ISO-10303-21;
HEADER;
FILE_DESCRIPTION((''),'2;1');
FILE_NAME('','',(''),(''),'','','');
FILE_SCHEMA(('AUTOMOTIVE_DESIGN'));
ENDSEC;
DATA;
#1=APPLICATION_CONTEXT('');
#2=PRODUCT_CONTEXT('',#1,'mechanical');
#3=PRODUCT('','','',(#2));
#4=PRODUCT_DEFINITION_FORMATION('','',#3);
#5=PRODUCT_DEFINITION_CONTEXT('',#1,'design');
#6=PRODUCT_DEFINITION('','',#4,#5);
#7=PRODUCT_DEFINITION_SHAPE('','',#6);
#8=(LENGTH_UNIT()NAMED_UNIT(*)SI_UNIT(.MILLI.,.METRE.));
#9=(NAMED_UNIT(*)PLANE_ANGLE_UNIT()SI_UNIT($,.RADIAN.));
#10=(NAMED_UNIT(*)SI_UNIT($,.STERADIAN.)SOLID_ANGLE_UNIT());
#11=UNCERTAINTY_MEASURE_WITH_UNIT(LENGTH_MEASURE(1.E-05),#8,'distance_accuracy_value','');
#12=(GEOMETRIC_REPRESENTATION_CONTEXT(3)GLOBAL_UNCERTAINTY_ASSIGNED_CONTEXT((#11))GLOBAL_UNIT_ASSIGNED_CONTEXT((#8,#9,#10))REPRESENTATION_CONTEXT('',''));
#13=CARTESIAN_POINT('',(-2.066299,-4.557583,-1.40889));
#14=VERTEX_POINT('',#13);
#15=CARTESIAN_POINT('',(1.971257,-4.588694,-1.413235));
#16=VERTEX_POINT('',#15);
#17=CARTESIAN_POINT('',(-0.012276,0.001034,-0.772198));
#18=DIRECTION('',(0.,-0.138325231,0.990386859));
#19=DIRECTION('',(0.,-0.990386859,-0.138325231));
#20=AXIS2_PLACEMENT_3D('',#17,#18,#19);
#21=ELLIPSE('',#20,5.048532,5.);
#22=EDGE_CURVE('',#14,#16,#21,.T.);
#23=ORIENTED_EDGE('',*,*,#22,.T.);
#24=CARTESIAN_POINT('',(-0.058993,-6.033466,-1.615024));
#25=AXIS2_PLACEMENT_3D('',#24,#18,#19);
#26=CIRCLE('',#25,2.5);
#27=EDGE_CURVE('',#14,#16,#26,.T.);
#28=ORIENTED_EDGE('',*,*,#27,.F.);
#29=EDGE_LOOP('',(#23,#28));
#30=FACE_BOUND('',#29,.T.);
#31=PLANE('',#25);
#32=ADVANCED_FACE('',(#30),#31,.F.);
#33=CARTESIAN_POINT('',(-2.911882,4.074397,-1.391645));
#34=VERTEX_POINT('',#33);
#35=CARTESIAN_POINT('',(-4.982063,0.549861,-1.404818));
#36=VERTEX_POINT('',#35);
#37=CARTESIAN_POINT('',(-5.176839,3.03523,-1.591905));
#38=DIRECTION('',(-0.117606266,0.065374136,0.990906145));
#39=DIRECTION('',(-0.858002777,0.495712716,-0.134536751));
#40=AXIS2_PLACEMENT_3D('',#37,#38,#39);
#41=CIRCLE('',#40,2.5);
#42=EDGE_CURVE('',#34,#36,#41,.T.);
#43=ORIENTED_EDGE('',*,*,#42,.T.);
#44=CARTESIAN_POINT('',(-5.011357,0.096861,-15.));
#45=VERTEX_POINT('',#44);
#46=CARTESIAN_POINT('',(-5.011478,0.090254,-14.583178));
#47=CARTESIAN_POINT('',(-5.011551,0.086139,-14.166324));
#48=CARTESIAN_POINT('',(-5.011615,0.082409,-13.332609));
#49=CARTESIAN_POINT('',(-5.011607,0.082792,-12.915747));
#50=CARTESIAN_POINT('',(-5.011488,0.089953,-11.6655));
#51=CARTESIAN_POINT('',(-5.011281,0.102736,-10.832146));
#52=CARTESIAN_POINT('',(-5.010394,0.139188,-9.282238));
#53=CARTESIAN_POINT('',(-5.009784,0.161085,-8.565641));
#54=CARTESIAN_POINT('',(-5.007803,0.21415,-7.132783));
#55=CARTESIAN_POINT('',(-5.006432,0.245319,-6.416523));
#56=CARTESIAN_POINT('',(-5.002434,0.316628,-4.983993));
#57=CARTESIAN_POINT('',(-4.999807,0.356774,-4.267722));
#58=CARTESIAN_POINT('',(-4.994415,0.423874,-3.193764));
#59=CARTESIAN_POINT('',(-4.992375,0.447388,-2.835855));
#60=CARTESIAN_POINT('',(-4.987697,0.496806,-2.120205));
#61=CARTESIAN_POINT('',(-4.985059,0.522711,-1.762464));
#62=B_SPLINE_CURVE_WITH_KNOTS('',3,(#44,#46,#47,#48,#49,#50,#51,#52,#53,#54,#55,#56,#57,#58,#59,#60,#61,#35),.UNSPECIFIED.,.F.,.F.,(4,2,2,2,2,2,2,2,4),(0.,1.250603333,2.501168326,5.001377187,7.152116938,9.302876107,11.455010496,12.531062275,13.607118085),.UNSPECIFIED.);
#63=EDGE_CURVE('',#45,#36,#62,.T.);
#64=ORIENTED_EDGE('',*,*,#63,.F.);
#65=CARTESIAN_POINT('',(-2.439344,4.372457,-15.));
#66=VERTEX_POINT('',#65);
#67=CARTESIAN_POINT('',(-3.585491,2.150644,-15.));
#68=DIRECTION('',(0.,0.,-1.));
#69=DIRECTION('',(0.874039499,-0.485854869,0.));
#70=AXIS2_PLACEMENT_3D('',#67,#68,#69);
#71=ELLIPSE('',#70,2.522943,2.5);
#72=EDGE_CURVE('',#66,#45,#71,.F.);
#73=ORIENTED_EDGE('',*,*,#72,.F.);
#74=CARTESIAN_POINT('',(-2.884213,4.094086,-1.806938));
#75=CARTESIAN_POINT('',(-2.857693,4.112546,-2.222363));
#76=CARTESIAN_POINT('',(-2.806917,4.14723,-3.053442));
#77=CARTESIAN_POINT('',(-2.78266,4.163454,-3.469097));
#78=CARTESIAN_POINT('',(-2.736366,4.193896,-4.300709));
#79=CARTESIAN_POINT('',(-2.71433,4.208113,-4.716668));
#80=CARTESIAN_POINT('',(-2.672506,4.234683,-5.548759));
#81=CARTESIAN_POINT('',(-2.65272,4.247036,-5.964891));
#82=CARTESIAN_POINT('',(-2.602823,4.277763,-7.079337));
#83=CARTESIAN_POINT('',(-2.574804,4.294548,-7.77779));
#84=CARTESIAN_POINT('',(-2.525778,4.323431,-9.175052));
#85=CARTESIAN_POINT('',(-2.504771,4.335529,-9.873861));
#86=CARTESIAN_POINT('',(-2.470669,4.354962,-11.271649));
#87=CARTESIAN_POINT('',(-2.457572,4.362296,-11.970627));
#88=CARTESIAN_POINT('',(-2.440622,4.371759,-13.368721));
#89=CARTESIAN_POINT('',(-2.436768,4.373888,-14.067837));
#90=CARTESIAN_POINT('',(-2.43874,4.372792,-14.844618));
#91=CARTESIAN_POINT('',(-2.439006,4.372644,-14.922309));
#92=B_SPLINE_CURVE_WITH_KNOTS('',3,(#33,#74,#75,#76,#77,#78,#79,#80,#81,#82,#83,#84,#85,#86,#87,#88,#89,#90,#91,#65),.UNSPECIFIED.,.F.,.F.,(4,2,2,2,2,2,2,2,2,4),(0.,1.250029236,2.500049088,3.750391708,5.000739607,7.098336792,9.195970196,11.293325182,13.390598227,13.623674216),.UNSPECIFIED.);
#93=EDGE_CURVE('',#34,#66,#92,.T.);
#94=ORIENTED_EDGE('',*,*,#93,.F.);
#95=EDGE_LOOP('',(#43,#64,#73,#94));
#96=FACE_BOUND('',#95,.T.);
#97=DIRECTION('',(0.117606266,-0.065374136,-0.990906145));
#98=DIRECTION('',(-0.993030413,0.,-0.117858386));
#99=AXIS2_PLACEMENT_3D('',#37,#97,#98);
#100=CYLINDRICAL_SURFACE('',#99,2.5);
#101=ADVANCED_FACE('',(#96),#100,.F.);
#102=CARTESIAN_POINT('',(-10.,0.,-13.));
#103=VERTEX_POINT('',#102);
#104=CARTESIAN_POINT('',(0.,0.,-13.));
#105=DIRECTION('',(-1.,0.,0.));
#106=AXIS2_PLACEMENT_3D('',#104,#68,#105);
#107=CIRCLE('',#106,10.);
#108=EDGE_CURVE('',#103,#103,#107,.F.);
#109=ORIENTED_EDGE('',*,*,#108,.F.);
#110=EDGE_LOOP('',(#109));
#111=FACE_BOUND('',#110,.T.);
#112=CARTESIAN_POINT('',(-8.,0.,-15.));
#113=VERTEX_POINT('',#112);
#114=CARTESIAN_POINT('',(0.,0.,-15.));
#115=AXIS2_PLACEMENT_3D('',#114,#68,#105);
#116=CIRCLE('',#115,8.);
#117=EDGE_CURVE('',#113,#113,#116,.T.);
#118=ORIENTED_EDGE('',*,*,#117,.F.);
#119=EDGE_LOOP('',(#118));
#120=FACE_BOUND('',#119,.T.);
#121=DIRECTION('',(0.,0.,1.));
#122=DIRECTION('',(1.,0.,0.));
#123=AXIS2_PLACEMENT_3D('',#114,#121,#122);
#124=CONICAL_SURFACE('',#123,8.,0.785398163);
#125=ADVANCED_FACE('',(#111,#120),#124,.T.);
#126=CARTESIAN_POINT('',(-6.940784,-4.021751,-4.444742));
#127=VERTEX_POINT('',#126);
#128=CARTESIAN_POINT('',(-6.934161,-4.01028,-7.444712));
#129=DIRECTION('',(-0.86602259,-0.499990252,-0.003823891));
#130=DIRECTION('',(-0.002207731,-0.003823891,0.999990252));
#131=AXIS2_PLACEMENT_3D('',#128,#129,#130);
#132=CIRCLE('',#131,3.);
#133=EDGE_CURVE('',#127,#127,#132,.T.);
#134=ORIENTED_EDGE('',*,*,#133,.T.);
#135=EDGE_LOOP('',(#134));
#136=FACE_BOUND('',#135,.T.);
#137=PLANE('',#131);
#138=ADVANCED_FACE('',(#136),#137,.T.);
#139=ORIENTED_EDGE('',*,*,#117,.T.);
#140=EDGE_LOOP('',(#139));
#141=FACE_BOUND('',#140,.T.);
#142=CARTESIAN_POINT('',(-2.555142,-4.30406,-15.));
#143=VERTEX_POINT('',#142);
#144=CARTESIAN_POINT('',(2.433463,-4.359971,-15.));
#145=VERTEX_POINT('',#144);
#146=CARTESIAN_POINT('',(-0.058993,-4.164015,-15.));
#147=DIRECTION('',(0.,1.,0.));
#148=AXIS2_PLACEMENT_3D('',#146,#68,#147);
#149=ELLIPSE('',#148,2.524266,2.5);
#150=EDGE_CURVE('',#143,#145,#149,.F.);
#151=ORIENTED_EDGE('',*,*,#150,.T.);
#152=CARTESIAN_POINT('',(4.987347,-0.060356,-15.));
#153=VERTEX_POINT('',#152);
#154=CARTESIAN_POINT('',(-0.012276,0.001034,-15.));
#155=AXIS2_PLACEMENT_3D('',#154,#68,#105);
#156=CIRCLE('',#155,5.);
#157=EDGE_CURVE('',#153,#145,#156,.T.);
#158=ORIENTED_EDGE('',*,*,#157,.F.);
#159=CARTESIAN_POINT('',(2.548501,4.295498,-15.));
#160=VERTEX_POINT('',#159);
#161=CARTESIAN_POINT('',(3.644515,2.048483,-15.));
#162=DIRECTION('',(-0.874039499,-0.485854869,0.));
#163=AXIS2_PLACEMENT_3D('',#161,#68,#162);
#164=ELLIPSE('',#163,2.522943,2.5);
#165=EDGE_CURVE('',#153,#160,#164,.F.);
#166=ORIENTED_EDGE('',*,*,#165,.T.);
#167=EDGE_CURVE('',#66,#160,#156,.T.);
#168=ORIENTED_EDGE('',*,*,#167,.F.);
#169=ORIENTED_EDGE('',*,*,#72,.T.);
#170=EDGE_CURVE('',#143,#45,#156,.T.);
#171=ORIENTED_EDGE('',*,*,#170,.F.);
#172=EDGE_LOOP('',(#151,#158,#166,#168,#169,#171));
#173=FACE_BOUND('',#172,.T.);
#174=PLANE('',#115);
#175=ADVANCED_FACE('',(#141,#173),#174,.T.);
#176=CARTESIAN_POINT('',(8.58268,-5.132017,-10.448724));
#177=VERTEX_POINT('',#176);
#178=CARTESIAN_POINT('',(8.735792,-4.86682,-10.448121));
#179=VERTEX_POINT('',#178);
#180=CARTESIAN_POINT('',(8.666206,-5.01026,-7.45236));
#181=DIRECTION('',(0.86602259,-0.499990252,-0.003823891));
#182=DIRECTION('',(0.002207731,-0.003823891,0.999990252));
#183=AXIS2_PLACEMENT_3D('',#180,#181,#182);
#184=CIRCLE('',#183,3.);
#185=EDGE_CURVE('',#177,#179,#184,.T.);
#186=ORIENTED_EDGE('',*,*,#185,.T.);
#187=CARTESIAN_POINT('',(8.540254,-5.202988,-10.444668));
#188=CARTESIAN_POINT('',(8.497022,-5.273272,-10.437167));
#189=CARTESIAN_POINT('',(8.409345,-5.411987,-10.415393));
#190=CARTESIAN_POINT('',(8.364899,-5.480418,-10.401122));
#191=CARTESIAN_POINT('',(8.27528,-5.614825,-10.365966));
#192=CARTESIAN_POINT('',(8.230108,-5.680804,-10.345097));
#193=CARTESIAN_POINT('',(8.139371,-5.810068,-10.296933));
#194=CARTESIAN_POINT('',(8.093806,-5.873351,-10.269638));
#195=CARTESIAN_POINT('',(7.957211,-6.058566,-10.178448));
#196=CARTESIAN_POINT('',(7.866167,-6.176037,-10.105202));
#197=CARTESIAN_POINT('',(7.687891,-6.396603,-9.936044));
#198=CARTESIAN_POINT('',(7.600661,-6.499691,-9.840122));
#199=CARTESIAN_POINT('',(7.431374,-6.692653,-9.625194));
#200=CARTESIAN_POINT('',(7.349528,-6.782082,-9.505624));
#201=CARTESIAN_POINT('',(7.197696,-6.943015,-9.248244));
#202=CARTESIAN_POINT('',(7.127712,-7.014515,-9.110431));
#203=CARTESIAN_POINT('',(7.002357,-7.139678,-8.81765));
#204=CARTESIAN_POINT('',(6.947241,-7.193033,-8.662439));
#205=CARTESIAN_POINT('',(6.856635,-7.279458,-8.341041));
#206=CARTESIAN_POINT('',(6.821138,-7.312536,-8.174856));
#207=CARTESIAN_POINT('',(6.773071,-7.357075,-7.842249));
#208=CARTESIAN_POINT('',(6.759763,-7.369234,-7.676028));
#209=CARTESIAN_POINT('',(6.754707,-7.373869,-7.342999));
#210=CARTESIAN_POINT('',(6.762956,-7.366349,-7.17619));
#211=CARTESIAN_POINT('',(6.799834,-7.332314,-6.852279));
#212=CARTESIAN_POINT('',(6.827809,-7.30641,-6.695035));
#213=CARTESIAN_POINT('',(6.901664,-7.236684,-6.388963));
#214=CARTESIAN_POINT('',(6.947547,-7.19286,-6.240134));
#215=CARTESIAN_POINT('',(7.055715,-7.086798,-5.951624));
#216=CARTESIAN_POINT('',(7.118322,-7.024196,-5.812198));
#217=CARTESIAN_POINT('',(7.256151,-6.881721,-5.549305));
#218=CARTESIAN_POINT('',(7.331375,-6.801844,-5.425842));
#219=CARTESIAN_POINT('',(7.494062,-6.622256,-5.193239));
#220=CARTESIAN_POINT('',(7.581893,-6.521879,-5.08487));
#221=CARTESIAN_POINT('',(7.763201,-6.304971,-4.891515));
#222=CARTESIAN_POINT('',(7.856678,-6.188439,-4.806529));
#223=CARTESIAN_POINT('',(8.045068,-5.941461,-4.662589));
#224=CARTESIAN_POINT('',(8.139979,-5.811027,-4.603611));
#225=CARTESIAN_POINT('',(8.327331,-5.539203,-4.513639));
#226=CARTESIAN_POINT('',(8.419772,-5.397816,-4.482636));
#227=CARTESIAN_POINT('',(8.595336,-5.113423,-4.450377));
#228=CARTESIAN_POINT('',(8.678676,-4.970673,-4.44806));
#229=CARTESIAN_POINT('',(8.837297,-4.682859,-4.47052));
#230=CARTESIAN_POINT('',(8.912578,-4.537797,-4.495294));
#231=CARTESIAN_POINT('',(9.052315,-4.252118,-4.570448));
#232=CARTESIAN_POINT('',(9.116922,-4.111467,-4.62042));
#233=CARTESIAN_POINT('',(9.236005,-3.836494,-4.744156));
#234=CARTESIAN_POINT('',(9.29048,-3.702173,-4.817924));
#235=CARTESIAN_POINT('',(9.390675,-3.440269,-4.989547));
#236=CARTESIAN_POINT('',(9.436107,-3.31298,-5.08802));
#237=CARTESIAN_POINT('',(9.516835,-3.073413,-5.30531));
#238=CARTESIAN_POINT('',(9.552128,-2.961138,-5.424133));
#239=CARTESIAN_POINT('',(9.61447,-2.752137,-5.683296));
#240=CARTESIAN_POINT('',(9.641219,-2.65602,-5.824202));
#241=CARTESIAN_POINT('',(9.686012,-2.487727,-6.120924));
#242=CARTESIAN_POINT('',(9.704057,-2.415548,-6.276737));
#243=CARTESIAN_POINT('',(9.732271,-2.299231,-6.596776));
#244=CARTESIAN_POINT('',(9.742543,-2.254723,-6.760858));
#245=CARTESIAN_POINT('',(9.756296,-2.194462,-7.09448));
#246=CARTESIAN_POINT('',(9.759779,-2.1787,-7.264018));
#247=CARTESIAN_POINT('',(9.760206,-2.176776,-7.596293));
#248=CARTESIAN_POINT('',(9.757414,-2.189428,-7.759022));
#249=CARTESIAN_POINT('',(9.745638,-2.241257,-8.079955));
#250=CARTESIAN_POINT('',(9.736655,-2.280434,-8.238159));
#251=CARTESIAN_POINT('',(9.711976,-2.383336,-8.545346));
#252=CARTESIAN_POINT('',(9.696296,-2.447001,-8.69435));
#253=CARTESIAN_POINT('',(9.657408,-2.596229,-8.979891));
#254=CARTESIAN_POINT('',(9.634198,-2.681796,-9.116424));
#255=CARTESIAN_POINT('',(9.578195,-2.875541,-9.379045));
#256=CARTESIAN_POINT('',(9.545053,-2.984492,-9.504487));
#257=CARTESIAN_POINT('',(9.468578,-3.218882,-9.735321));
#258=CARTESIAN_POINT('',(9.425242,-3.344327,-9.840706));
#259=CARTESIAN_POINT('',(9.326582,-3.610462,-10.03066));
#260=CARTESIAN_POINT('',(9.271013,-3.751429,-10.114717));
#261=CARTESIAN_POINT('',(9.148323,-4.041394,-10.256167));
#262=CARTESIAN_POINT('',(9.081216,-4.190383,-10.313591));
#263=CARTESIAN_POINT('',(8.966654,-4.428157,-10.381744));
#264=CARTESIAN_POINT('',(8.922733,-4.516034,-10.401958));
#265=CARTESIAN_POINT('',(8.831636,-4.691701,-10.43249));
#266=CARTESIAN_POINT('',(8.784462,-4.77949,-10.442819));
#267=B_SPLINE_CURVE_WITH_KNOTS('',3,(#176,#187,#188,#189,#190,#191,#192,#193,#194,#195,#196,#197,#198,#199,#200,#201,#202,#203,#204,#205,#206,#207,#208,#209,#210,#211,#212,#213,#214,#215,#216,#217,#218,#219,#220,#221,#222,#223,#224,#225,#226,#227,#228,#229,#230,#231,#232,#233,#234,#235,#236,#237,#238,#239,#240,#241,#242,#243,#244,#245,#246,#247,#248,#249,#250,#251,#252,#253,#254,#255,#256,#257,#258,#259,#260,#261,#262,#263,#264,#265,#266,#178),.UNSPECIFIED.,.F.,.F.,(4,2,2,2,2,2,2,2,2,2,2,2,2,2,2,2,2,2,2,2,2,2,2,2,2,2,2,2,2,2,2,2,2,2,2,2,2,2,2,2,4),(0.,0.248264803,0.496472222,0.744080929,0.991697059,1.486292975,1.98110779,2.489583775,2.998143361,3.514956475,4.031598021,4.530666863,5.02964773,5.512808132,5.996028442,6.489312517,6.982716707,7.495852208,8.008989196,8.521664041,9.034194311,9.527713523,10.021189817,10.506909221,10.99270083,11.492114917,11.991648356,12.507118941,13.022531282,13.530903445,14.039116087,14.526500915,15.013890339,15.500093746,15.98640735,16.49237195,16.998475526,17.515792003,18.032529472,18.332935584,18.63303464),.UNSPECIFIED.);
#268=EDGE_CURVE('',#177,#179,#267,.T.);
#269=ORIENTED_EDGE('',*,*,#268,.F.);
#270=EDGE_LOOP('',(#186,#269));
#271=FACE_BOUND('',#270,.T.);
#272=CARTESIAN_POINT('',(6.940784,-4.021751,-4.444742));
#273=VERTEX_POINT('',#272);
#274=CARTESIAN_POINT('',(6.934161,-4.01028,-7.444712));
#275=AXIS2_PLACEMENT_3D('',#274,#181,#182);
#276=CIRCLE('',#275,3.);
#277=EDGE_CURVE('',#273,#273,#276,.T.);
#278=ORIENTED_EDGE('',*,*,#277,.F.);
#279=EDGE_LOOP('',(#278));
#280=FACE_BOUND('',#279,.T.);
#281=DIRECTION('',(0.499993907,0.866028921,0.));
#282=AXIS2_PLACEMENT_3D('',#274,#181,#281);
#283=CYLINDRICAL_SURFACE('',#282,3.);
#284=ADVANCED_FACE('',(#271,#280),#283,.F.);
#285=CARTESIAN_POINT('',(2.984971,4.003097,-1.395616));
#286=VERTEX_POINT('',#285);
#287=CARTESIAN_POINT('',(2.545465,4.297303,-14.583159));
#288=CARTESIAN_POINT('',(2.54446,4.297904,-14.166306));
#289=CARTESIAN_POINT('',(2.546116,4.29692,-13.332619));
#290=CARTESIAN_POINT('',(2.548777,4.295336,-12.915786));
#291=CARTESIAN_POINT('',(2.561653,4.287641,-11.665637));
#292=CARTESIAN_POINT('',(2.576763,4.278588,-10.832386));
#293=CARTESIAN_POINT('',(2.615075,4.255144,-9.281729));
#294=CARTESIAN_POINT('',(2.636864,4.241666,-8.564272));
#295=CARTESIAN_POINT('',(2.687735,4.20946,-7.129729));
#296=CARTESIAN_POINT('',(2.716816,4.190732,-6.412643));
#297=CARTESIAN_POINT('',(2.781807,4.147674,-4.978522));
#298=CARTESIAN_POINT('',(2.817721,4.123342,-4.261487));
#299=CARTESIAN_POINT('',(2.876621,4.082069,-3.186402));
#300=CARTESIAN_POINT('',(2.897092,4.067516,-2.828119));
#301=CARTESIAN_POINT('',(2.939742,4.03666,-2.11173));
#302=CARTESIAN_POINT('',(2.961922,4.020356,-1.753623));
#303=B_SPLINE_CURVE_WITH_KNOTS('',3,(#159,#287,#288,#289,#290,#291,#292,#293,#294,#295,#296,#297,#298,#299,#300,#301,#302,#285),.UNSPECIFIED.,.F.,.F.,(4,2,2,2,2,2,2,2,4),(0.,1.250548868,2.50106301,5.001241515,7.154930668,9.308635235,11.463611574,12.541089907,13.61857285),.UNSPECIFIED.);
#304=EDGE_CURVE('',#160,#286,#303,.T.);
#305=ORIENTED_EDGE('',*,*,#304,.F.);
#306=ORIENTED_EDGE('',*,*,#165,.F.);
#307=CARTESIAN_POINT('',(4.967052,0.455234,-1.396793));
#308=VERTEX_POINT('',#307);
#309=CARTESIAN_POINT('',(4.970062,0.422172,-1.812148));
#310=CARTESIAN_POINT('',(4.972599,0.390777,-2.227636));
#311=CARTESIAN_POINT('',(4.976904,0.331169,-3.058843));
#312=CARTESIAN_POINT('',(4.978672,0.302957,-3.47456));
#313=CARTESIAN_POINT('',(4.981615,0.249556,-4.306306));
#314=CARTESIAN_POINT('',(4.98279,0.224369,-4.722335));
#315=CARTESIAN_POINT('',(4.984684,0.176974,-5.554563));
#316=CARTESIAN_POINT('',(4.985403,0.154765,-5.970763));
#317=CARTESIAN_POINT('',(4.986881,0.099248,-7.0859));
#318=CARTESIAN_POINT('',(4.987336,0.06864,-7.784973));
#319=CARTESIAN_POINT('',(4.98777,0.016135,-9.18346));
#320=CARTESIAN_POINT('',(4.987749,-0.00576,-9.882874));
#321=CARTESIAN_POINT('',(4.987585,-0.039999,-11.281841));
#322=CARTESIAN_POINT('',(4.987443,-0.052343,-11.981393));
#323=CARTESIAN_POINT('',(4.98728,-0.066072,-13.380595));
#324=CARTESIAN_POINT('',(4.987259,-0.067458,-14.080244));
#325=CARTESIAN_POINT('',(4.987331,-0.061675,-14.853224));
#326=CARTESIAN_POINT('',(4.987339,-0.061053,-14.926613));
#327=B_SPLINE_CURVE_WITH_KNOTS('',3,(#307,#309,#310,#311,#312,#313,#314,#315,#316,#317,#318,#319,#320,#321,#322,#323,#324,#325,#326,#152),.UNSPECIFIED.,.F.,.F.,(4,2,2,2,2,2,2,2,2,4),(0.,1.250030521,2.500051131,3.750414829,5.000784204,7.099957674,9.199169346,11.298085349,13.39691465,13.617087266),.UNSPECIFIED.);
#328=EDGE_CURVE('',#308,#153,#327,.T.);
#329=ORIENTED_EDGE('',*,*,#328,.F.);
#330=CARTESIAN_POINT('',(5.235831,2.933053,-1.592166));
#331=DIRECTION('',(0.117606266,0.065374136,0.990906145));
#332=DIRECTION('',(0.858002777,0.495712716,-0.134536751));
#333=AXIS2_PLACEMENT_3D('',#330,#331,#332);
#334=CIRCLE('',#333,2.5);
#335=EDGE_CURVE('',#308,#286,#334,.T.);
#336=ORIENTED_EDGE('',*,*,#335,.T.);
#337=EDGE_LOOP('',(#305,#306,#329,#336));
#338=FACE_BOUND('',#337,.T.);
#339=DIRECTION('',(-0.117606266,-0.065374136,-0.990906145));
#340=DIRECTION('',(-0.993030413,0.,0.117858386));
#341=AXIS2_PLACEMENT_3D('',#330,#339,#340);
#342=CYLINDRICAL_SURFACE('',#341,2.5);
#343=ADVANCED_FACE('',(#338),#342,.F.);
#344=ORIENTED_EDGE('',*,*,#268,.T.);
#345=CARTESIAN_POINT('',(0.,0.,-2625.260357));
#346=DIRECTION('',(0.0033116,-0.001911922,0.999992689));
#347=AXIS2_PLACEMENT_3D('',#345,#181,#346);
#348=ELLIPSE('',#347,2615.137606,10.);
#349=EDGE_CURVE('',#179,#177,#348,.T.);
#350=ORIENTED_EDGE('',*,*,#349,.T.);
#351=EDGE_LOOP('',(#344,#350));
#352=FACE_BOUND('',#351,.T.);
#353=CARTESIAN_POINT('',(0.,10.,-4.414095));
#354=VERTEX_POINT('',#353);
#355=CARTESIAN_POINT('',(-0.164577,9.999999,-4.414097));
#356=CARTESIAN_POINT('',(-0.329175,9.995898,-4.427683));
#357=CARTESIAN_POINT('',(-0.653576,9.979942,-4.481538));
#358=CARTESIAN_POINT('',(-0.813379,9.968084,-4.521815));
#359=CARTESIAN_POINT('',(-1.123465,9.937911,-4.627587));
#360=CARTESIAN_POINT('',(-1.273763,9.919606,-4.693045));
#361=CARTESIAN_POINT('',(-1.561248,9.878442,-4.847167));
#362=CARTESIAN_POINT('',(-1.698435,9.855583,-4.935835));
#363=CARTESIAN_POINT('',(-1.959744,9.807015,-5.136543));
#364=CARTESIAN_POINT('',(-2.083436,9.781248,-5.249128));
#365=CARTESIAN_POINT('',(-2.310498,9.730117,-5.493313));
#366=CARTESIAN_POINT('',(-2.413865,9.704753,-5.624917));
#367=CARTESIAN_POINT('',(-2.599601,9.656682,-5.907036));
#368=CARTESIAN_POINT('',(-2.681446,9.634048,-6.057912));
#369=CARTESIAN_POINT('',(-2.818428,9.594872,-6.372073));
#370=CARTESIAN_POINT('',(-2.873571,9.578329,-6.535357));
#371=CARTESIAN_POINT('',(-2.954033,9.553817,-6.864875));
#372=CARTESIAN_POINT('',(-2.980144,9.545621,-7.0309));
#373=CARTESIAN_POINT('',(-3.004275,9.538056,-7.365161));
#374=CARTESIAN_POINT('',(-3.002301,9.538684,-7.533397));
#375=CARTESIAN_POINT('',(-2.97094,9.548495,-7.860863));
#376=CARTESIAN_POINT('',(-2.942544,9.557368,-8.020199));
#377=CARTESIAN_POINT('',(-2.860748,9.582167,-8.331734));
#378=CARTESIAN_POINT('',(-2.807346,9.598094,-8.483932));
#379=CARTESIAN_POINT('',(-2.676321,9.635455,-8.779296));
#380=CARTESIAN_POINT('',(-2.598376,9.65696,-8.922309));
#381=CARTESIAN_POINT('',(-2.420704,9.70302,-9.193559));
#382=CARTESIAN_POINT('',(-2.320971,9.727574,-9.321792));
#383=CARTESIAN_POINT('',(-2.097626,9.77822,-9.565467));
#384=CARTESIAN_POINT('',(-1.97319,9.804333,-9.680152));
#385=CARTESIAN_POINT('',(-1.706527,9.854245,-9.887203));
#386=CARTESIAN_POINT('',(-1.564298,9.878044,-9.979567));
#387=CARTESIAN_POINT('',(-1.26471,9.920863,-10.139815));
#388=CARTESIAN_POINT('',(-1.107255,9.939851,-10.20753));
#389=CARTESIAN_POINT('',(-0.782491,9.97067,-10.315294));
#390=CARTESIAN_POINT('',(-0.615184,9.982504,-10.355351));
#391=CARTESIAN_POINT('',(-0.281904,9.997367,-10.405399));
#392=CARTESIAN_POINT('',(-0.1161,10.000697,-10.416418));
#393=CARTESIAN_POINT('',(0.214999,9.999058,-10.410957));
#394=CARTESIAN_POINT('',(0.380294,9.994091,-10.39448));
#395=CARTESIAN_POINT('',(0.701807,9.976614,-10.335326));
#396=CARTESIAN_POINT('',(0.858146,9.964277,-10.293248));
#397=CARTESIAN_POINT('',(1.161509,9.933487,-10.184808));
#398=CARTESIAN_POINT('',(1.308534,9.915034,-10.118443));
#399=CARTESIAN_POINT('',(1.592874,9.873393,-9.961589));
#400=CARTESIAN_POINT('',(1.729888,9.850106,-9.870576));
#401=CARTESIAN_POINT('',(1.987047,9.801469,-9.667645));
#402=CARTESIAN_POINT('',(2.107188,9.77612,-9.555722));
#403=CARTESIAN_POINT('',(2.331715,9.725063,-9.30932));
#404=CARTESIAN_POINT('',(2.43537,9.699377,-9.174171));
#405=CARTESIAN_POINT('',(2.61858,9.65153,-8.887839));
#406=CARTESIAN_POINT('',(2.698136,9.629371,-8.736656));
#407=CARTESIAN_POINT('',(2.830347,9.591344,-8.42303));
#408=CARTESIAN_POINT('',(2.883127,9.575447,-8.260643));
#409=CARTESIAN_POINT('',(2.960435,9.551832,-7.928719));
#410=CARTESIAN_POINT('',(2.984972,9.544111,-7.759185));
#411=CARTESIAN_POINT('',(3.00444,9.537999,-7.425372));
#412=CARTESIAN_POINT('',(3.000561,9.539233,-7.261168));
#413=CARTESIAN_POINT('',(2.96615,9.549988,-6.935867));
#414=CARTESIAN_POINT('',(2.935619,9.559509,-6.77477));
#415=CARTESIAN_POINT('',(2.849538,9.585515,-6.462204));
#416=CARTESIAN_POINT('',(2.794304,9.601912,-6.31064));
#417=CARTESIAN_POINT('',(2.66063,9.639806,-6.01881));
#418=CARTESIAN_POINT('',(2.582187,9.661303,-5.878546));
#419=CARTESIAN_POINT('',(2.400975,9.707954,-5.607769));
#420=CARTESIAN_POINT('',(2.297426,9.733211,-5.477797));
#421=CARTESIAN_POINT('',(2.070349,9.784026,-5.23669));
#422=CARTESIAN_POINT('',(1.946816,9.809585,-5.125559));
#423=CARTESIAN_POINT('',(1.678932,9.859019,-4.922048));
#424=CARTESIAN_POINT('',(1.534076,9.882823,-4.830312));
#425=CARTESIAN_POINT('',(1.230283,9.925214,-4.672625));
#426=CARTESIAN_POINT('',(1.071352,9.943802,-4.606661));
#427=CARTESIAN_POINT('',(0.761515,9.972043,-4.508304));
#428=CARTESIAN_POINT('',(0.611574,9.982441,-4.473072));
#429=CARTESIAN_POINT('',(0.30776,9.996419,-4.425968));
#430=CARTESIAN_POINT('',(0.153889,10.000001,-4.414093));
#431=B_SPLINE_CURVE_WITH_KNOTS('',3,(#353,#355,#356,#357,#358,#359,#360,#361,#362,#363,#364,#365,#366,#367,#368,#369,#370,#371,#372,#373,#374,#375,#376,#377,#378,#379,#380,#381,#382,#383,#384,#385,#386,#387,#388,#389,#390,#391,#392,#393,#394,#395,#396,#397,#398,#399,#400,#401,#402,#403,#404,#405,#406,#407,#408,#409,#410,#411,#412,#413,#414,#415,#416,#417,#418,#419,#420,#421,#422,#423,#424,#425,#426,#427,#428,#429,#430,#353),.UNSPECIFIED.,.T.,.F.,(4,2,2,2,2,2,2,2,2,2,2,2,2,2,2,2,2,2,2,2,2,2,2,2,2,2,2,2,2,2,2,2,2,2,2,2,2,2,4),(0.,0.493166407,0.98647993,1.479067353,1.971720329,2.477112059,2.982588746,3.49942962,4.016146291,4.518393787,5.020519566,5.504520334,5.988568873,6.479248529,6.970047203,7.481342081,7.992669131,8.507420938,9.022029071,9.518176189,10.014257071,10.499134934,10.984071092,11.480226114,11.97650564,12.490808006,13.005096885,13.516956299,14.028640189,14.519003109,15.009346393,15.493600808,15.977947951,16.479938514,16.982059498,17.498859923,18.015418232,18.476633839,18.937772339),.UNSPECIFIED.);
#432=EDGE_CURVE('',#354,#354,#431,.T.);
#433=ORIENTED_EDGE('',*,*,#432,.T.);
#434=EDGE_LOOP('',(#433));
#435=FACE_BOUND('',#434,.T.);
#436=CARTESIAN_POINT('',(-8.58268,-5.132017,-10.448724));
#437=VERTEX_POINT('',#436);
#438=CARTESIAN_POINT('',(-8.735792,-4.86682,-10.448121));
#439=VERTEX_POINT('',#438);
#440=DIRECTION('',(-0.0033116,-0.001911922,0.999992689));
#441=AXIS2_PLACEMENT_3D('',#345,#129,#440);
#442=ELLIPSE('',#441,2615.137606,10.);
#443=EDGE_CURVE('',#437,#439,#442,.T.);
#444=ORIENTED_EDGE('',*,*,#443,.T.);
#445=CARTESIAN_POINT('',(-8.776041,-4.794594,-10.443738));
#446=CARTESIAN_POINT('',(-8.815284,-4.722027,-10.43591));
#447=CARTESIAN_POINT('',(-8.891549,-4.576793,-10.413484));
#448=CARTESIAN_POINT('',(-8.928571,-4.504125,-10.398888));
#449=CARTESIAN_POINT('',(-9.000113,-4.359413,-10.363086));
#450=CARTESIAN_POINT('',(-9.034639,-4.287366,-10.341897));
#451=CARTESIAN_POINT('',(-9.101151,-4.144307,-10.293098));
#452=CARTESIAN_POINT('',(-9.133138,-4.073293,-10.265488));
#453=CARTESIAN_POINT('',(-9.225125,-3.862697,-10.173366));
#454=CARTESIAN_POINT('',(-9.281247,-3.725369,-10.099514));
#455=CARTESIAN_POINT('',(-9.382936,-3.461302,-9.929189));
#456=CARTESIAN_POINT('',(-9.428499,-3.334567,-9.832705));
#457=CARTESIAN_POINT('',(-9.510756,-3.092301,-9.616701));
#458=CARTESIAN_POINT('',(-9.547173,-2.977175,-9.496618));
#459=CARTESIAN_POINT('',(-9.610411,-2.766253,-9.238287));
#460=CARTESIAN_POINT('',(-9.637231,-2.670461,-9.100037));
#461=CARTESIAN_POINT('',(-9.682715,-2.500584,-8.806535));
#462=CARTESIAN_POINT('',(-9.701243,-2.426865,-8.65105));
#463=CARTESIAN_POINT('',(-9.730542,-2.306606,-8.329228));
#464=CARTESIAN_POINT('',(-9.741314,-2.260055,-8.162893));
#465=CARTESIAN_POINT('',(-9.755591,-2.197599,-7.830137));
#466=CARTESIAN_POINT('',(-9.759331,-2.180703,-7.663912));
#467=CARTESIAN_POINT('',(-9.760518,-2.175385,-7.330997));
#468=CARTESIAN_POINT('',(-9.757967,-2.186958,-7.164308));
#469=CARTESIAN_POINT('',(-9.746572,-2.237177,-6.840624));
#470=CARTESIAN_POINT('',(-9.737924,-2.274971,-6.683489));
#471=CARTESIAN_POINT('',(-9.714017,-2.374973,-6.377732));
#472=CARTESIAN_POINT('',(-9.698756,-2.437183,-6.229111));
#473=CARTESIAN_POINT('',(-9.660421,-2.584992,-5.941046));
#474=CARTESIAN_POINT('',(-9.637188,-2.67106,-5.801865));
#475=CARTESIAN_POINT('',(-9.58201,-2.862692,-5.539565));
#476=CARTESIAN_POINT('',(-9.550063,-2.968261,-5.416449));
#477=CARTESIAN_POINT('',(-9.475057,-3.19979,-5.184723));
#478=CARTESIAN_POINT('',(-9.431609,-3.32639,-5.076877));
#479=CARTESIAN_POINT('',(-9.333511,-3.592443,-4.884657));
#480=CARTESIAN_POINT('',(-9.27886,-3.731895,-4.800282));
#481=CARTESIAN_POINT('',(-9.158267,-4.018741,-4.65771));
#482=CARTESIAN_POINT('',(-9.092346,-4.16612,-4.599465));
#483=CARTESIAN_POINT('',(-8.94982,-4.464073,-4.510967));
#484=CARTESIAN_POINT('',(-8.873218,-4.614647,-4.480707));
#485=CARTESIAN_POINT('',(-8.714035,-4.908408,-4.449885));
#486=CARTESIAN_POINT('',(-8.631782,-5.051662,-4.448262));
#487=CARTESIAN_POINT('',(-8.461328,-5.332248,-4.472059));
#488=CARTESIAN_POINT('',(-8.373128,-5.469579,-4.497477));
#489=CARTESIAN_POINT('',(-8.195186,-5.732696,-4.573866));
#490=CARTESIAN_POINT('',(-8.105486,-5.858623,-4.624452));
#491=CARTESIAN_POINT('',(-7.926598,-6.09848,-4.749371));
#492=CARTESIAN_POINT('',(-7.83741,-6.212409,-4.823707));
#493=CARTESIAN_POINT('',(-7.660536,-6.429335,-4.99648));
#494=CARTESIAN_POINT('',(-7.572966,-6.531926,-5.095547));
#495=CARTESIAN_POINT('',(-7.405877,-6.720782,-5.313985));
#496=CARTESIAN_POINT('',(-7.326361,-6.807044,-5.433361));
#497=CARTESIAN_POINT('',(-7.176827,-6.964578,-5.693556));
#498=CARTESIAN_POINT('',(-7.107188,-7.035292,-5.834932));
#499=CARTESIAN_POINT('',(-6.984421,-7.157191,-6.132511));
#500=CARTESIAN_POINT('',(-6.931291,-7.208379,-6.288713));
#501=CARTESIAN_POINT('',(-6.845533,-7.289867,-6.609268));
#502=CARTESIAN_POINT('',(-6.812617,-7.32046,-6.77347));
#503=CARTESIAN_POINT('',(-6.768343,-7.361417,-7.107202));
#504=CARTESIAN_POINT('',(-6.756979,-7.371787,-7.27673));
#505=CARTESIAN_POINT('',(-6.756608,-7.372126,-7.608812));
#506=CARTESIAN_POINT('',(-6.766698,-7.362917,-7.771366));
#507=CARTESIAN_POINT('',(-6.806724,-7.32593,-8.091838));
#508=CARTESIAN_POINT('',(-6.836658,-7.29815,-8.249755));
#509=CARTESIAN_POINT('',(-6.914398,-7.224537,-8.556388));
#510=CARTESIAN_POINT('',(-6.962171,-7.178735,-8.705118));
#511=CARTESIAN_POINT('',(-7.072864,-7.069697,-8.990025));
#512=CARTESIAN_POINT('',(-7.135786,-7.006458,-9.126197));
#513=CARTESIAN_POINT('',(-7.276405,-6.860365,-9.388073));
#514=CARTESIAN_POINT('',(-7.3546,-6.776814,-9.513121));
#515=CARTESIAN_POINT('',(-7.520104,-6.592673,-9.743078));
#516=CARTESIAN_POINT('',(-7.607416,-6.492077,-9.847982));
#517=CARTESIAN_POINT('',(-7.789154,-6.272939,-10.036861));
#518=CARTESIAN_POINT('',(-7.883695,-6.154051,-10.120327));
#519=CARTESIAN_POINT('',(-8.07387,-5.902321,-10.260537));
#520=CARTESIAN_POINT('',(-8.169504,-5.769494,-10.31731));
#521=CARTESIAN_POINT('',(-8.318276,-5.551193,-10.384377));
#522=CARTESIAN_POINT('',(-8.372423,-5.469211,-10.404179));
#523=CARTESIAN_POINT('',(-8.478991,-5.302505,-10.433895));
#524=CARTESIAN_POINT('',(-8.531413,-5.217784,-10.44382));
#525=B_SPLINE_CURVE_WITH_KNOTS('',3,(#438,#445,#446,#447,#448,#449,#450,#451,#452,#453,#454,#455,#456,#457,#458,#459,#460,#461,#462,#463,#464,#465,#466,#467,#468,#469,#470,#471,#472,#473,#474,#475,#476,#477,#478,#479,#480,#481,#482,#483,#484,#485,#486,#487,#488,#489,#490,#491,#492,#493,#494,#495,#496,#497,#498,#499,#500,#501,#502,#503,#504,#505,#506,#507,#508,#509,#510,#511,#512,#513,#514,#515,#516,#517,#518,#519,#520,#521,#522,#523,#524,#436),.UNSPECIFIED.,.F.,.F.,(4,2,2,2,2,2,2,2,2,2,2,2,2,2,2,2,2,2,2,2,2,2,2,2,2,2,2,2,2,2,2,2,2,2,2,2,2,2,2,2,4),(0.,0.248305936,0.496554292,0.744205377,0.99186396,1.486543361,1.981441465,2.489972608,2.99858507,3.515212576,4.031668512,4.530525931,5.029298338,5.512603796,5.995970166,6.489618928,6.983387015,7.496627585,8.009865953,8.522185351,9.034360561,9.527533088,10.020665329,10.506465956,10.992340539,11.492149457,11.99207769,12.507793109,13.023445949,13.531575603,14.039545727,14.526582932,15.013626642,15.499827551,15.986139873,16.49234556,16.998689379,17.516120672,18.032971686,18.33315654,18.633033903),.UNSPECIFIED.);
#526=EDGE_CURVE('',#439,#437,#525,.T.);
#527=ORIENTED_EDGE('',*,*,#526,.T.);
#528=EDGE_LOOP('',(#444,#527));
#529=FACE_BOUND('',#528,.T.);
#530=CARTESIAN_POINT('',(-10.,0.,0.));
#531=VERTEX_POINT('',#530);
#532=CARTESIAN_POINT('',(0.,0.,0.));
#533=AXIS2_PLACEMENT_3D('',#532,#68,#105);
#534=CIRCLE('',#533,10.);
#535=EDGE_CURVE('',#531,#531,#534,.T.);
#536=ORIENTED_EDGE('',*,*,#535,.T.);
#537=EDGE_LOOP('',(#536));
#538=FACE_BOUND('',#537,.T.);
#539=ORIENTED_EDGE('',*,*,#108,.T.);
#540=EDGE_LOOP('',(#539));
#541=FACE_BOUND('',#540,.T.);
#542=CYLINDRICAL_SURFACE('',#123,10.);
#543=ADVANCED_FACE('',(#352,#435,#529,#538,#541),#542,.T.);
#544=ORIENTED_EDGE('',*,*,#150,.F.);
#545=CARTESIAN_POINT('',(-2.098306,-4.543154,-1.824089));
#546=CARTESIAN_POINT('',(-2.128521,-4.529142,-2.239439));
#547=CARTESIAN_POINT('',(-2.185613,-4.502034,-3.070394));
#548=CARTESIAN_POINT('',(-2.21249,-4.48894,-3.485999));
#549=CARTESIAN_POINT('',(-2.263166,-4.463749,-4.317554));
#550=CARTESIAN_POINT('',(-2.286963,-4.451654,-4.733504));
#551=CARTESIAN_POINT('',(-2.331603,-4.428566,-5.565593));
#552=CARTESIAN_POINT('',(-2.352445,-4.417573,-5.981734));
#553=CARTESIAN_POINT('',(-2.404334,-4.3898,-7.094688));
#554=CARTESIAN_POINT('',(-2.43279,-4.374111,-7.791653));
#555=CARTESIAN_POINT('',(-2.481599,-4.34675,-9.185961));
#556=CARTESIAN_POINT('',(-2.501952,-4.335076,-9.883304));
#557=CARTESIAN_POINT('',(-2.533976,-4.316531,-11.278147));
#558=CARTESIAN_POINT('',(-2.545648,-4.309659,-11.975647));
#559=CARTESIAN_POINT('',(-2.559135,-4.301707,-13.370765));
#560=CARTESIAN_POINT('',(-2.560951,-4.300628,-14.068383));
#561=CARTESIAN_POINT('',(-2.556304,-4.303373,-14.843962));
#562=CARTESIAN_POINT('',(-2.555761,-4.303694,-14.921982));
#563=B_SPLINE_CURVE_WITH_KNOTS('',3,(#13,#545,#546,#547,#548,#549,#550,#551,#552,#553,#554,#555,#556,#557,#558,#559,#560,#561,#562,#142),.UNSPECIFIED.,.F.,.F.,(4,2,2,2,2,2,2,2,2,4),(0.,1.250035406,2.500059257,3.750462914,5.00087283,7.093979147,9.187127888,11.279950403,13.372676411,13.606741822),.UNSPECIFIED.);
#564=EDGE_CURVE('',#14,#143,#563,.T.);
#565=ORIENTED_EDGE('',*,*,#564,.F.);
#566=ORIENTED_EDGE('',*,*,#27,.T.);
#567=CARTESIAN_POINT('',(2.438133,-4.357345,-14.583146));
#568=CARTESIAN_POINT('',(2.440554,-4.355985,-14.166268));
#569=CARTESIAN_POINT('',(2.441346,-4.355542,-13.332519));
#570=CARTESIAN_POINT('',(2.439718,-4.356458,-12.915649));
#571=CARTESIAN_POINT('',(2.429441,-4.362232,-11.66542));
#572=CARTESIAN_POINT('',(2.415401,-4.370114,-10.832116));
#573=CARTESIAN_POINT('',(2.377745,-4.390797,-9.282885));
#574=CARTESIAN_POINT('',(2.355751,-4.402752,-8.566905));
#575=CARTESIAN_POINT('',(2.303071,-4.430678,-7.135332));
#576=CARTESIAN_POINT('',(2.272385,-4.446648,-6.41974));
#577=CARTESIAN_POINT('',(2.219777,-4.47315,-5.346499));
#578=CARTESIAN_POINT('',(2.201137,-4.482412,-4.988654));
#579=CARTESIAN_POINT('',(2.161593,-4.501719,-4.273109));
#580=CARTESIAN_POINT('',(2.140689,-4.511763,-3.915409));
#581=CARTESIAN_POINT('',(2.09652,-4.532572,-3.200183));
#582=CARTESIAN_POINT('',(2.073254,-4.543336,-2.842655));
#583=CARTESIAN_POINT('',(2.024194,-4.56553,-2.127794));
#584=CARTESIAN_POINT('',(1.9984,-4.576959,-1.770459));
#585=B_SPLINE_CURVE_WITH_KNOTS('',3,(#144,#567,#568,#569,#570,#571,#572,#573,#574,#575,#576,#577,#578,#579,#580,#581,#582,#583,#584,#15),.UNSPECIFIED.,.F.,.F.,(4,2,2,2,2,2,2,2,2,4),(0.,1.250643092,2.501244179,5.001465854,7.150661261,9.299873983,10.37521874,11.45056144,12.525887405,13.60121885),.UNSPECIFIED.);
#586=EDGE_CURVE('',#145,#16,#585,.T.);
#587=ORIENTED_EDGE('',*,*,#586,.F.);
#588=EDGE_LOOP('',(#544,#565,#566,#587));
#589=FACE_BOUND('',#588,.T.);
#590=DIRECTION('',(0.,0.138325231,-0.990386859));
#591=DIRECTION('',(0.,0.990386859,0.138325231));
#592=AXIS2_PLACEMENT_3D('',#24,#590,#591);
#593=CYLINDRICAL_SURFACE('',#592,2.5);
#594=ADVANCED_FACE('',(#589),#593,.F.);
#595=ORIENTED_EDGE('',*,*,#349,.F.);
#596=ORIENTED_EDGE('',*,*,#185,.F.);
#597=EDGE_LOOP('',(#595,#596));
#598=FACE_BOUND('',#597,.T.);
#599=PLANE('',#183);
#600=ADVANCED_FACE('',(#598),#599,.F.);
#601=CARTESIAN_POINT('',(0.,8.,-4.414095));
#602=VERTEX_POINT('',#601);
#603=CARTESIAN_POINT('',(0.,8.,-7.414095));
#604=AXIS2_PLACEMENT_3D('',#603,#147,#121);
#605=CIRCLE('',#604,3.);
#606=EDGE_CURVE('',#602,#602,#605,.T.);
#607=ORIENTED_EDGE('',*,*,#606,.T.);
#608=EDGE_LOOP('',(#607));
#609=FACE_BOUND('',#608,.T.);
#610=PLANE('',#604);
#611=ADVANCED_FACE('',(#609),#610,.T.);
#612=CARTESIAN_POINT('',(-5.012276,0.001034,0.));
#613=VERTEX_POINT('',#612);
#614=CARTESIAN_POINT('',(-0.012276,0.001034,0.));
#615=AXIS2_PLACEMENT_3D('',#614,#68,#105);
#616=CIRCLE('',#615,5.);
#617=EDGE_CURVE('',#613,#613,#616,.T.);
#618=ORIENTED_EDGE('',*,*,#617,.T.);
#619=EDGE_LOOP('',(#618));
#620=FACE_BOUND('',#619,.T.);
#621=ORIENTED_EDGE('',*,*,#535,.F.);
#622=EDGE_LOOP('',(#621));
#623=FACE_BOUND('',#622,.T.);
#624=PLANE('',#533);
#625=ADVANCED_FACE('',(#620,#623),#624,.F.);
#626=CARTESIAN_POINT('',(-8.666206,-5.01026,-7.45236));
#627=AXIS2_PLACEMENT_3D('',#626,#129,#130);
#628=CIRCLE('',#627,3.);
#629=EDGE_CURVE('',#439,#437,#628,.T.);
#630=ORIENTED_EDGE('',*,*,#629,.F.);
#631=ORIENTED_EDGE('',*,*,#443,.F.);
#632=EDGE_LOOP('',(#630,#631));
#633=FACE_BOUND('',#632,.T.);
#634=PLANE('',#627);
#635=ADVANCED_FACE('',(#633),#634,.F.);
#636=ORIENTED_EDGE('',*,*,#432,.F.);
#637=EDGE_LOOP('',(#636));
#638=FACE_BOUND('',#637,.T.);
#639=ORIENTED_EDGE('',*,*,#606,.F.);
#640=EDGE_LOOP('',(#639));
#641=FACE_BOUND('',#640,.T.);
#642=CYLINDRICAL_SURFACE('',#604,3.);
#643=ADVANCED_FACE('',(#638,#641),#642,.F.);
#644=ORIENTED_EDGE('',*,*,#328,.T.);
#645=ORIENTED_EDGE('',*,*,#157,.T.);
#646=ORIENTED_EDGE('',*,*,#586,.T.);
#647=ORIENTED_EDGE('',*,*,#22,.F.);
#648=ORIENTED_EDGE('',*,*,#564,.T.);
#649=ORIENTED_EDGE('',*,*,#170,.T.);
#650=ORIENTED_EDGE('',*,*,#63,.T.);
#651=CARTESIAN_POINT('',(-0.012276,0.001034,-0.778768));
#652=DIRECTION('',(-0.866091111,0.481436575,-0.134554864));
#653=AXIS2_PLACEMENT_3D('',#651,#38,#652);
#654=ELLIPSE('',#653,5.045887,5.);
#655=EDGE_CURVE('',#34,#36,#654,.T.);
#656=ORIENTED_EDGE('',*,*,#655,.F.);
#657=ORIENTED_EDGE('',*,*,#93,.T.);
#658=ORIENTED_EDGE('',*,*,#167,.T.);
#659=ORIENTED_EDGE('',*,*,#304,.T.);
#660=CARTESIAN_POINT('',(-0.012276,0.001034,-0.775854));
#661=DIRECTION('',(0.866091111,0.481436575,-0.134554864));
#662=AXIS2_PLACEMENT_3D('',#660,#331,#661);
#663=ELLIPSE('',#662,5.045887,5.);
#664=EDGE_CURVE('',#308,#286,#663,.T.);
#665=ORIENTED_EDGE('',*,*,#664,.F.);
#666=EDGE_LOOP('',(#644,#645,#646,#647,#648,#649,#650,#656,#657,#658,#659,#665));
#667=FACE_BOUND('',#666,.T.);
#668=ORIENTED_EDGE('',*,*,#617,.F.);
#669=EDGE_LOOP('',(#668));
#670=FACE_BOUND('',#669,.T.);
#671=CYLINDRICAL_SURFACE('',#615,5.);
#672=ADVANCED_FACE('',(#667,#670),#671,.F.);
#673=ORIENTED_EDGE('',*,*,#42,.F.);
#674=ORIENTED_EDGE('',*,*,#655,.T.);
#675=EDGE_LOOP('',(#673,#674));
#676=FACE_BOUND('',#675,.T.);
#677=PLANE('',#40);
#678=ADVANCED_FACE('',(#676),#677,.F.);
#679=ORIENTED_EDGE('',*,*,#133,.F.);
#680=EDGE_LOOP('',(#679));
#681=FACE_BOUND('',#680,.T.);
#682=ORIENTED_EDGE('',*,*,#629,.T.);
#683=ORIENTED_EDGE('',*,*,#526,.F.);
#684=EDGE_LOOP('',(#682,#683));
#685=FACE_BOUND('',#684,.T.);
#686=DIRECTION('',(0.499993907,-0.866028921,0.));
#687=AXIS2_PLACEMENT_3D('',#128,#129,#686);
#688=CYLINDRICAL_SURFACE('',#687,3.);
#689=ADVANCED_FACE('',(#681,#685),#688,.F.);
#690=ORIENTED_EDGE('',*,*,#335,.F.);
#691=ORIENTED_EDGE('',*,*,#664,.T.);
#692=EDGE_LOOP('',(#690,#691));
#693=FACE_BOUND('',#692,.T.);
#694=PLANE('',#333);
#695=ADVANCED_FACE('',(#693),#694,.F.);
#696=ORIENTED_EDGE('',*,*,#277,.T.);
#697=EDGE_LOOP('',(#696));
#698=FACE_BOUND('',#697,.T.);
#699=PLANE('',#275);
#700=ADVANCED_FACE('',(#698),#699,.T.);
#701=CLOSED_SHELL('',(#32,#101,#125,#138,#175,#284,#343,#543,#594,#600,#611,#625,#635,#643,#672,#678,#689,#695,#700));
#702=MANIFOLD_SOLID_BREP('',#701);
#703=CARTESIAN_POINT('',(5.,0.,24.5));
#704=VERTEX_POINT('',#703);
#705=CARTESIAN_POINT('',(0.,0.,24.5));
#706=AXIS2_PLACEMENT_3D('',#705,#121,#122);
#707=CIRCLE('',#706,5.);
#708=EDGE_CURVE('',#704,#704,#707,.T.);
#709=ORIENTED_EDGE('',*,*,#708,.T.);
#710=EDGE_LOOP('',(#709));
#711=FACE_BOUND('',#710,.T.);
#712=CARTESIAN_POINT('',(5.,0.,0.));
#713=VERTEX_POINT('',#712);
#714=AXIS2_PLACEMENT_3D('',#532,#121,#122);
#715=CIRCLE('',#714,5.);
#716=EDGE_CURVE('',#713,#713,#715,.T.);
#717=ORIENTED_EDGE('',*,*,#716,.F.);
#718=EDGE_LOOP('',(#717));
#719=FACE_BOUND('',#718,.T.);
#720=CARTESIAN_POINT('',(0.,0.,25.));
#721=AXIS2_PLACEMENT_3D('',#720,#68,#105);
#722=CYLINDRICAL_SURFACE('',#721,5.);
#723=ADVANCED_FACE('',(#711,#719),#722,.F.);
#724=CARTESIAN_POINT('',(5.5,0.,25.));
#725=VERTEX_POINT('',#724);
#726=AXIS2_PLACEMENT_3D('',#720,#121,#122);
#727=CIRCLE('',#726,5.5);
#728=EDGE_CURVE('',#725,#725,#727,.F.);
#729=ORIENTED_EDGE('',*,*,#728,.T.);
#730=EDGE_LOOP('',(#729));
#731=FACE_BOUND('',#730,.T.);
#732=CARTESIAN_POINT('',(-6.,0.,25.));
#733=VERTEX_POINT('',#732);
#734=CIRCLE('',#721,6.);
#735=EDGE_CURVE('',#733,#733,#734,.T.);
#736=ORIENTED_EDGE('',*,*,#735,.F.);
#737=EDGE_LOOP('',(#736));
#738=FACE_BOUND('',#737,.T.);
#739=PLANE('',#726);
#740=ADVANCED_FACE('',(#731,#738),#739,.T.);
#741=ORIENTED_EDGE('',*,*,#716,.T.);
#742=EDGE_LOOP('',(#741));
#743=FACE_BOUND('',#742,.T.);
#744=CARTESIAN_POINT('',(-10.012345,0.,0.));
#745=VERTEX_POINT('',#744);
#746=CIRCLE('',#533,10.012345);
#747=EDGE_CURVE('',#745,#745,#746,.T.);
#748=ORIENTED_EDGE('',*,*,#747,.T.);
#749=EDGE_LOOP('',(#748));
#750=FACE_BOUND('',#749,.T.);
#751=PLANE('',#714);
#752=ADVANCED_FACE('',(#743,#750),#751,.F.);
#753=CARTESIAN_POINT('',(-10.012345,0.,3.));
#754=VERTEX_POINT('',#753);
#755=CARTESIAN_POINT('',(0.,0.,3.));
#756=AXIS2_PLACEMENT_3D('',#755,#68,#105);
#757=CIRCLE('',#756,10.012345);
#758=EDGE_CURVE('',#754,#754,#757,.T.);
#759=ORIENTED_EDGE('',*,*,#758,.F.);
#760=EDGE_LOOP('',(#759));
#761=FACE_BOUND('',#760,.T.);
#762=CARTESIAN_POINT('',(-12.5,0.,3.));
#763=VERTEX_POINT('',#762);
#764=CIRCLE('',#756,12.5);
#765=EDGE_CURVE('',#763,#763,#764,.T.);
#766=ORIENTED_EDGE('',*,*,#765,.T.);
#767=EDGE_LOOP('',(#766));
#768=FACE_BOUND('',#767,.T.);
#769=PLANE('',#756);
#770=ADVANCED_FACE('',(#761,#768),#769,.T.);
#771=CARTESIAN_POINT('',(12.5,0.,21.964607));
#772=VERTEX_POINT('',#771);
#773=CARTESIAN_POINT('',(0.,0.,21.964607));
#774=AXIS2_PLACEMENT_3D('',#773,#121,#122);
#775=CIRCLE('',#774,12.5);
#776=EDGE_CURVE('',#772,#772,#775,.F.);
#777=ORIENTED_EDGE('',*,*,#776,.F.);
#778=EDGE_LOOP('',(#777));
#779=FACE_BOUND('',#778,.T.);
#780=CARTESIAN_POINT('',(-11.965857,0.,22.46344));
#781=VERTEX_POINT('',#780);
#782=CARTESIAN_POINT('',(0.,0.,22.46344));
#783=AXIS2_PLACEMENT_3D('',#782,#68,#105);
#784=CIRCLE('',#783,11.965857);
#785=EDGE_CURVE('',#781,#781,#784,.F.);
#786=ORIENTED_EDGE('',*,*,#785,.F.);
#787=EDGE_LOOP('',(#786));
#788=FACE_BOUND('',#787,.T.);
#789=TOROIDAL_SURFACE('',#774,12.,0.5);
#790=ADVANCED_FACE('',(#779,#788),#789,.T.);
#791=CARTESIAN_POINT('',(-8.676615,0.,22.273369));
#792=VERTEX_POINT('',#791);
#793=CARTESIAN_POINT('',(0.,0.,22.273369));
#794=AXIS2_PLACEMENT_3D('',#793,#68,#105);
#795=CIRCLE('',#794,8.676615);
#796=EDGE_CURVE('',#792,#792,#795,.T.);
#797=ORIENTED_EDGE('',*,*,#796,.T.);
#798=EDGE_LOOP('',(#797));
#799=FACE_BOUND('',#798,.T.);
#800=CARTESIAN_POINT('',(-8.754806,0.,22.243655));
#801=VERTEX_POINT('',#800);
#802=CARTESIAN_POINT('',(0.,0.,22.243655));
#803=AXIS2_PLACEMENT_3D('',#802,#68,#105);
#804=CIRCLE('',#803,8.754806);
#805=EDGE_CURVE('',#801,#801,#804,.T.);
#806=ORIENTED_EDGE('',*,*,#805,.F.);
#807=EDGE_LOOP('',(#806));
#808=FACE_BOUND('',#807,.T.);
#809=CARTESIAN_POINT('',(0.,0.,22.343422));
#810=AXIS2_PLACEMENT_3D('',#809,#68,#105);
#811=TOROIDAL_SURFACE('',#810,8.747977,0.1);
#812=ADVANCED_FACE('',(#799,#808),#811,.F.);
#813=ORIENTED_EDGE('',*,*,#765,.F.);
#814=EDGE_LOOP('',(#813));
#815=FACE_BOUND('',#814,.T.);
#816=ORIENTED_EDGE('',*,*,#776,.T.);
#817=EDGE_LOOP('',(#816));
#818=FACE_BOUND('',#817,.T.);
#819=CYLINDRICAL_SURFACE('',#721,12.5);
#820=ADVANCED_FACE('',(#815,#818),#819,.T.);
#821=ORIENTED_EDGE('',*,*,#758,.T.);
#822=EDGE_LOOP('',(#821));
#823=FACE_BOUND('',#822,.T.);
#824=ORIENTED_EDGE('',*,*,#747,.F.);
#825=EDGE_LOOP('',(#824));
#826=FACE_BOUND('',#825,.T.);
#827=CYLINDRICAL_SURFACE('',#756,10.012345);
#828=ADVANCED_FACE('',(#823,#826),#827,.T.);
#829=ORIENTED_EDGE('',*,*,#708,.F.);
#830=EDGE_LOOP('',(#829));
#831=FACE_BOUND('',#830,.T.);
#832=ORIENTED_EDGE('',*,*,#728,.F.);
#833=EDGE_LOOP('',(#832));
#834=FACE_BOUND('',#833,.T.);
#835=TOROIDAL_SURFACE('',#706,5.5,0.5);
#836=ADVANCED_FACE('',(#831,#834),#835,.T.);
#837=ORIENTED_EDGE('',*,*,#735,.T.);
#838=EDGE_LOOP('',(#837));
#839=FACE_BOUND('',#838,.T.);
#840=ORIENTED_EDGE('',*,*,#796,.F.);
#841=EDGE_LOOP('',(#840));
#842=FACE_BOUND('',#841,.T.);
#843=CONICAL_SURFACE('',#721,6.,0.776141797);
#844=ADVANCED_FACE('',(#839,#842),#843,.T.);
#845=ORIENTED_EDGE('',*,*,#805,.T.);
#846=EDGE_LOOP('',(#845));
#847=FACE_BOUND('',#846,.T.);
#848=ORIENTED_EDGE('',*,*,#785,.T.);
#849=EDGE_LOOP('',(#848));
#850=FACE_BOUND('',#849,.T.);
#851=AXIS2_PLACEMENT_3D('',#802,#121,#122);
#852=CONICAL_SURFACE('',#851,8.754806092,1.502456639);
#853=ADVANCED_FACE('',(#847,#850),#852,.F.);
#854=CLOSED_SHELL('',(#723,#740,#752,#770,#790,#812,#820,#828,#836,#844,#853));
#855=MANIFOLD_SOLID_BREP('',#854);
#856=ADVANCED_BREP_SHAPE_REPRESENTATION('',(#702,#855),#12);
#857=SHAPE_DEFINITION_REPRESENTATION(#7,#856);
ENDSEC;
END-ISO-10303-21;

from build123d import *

# Parameters (mm, degrees)
SKETCH1_R           = 12.5
SKETCH1_R_2         = 5
BOSS_EXTRUDE1_DEPTH = 25
FILLET1_R           = 0.5
SKETCH3_R           = 10
BOSS_EXTRUDE2_DEPTH = 15
CHAMFER1_SIZE       = 2
SKETCH8_R           = 2.5
CUT_EXTRUDE1_DEPTH  = 24
CIRPATTERN1_COUNT   = 3
SKETCH6_R           = 5
CUT_EXTRUDE2_DEPTH  = 15
SKETCH5_R           = 3
CUT_EXTRUDE3_DEPTH  = 2
SKETCH9_R           = 12.50649661
SKETCH9_R_2         = 10.012344617
CUT_EXTRUDE4_DEPTH  = 3


with BuildPart() as part:
    # Sketch1 → Boss-Extrude1 (new body)
    with BuildSketch(Plane.XY):
        Circle(SKETCH1_R)
        Circle(SKETCH1_R_2, mode=Mode.SUBTRACT)
    extrude(amount=BOSS_EXTRUDE1_DEPTH)

    # Sketch2 → Cut-Revolve1 (revolve, cut)
    with BuildSketch(Plane(origin=(0, 0, 0), x_dir=(0, 0, -1), z_dir=(1, 0, 0)), mode=Mode.PRIVATE) as cut_revolve1_sk:
        with BuildLine():
            Line((-25, 12.5), (-22.5, 12.5))
            Line((-22.5, 12.5), (-22.243655425, 8.754806092))
            ThreePointArc((-22.243655425, 8.754806092), (-22.249944012, 8.712454692), (-22.273368866, 8.676615278))
            Line((-22.273368866, 8.676615278), (-25, 6))
            Line((-25, 6), (-25, 12.5))
        make_face()
    revolve(cut_revolve1_sk.sketch.rotate(Axis((0, 0, 0.001410909), (0, 0, 1)), 90), axis=Axis((0, 0, 0.001410909), (0, 0, 1)), mode=Mode.SUBTRACT)

    # Fillet1
    fillet1_edges = [part.edges().sort_by_distance(p)[0] for p in [
        (0, -12.5, 22.5),
        (-5, 0, 25),
    ]]
    fillet(fillet1_edges, radius=FILLET1_R)

    # Sketch9 → Cut-Extrude4 (cut)
    with BuildSketch(Plane(origin=(0, 0, 0), x_dir=(-1, 0, 0), z_dir=(0, 0, -1))):
        Circle(SKETCH9_R)
        Circle(SKETCH9_R_2, mode=Mode.SUBTRACT)
    extrude(amount=-CUT_EXTRUDE4_DEPTH, mode=Mode.SUBTRACT)


with BuildPart() as body_2:
    # Sketch3 → Boss-Extrude2 (new body)
    with BuildSketch(Plane(origin=(0, 0, 0), x_dir=(-1, 0, 0), z_dir=(0, 0, -1))):
        Circle(SKETCH3_R)
    extrude(amount=BOSS_EXTRUDE2_DEPTH)

    # Chamfer1
    chamfer1_edges = [body_2.edges().sort_by_distance(p)[0] for p in [
        (10, 0, -15),
    ]]
    chamfer(chamfer1_edges, length=CHAMFER1_SIZE)

    # Sketch8 → Cut-Extrude1 (cut)
    with BuildSketch(Plane(origin=(0, 0.037926228, -25), x_dir=(1, 0, 0), z_dir=(0, -0.138325230756588, 0.9903868590283985))):
        with Locations(Location((-0.058992617, -2.778294742, 0), (0, 0, 90))):
            Circle(SKETCH8_R)
    cut_extrude1 = extrude(amount=CUT_EXTRUDE1_DEPTH, mode=Mode.SUBTRACT)

    # CirPattern1: Cut-Extrude1 ×3 about axis
    cirpattern1_axis = Axis((0, -0.013059311, -5), (0, 0.0025492686554308094, -0.999996750609382))
    for i in range(1, CIRPATTERN1_COUNT):
        add(cut_extrude1.rotate(cirpattern1_axis, i * 360 / CIRPATTERN1_COUNT), mode=Mode.SUBTRACT)

    # Sketch6 → Cut-Extrude2 (cut)
    with BuildSketch(Plane(origin=(0, 0, -15), x_dir=(-1, 0, 0), z_dir=(0, 0, -1))):
        with Locations((0.012275783, 0.001033832)):
            Circle(SKETCH6_R)
    extrude(amount=-CUT_EXTRUDE2_DEPTH, mode=Mode.SUBTRACT)

    # Sketch5 → Cut-Extrude3 (cut)
    with BuildSketch(Plane(origin=(0, 10, 0), x_dir=(1, 0, 0), z_dir=(0, 1, 0))):
        with Locations(Location((0, 7.414094895, 0), (0, 0, 270))):
            Circle(SKETCH5_R)
    extrude(amount=-CUT_EXTRUDE3_DEPTH, mode=Mode.SUBTRACT)

    # CirPattern2: read off the stored shape, not the designer's step
    # CirPattern2: loft between two sections, ruled curve by curve
    cirpattern2_from = [
        Edge.make_three_point_arc((-6.850635196, -4.132036407, -10.441076683), (-5.436473367, -6.605518147, -7.297506356), (-7.01768621, -3.888522832, -4.448348164)),
        Edge.make_three_point_arc((-7.01768621, -3.888522832, -4.448348164), (-8.431848039, -1.415041091, -7.591918491), (-6.850635196, -4.132036407, -10.441076683)),
    ]
    cirpattern2_to = [
        Edge.make_three_point_arc((-8.582680376, -5.13201691, -10.448724464), (-7.168518547, -7.605498651, -7.305154137), (-8.749731389, -4.888503336, -4.455995946)),
        Edge.make_three_point_arc((-8.749731389, -4.888503336, -4.455995946), (-10.163893219, -2.415021595, -7.599566272), (-8.582680376, -5.13201691, -10.448724464)),
    ]
    cirpattern2 = Solid(Shell([*[Face.make_surface_from_curves(cirpattern2_from[k], cirpattern2_to[k]) for k in range(2)], Face(Wire(cirpattern2_from)), Face(Wire(cirpattern2_to))]))
    add(cirpattern2, mode=Mode.SUBTRACT)

    # CirPattern2 2: loft between two sections, ruled curve by curve
    cirpattern2_2_from = [
        Edge.make_three_point_arc((7.003747149, -3.866839031, -10.440473183), (8.43256038, -1.41614922, -7.285697089), (6.864574257, -4.153720208, -4.448951665)),
        Edge.make_three_point_arc((6.864574257, -4.153720208, -4.448951665), (5.435761026, -6.604410019, -7.603727758), (7.003747149, -3.866839031, -10.440473183)),
    ]
    cirpattern2_2_to = [
        Edge.make_three_point_arc((8.735792329, -4.866819535, -10.448120964), (10.16460556, -2.416129723, -7.29334487), (8.596619436, -5.153700711, -4.456599446)),
        Edge.make_three_point_arc((8.596619436, -5.153700711, -4.456599446), (7.167806205, -7.604390523, -7.611375539), (8.735792329, -4.866819535, -10.448120964)),
    ]
    cirpattern2_2 = Solid(Shell([*[Face.make_surface_from_curves(cirpattern2_2_from[k], cirpattern2_2_to[k]) for k in range(2)], Face(Wire(cirpattern2_2_from)), Face(Wire(cirpattern2_2_to))]))
    add(cirpattern2_2, mode=Mode.SUBTRACT)


solid = Compound([part.part, body_2.part])
